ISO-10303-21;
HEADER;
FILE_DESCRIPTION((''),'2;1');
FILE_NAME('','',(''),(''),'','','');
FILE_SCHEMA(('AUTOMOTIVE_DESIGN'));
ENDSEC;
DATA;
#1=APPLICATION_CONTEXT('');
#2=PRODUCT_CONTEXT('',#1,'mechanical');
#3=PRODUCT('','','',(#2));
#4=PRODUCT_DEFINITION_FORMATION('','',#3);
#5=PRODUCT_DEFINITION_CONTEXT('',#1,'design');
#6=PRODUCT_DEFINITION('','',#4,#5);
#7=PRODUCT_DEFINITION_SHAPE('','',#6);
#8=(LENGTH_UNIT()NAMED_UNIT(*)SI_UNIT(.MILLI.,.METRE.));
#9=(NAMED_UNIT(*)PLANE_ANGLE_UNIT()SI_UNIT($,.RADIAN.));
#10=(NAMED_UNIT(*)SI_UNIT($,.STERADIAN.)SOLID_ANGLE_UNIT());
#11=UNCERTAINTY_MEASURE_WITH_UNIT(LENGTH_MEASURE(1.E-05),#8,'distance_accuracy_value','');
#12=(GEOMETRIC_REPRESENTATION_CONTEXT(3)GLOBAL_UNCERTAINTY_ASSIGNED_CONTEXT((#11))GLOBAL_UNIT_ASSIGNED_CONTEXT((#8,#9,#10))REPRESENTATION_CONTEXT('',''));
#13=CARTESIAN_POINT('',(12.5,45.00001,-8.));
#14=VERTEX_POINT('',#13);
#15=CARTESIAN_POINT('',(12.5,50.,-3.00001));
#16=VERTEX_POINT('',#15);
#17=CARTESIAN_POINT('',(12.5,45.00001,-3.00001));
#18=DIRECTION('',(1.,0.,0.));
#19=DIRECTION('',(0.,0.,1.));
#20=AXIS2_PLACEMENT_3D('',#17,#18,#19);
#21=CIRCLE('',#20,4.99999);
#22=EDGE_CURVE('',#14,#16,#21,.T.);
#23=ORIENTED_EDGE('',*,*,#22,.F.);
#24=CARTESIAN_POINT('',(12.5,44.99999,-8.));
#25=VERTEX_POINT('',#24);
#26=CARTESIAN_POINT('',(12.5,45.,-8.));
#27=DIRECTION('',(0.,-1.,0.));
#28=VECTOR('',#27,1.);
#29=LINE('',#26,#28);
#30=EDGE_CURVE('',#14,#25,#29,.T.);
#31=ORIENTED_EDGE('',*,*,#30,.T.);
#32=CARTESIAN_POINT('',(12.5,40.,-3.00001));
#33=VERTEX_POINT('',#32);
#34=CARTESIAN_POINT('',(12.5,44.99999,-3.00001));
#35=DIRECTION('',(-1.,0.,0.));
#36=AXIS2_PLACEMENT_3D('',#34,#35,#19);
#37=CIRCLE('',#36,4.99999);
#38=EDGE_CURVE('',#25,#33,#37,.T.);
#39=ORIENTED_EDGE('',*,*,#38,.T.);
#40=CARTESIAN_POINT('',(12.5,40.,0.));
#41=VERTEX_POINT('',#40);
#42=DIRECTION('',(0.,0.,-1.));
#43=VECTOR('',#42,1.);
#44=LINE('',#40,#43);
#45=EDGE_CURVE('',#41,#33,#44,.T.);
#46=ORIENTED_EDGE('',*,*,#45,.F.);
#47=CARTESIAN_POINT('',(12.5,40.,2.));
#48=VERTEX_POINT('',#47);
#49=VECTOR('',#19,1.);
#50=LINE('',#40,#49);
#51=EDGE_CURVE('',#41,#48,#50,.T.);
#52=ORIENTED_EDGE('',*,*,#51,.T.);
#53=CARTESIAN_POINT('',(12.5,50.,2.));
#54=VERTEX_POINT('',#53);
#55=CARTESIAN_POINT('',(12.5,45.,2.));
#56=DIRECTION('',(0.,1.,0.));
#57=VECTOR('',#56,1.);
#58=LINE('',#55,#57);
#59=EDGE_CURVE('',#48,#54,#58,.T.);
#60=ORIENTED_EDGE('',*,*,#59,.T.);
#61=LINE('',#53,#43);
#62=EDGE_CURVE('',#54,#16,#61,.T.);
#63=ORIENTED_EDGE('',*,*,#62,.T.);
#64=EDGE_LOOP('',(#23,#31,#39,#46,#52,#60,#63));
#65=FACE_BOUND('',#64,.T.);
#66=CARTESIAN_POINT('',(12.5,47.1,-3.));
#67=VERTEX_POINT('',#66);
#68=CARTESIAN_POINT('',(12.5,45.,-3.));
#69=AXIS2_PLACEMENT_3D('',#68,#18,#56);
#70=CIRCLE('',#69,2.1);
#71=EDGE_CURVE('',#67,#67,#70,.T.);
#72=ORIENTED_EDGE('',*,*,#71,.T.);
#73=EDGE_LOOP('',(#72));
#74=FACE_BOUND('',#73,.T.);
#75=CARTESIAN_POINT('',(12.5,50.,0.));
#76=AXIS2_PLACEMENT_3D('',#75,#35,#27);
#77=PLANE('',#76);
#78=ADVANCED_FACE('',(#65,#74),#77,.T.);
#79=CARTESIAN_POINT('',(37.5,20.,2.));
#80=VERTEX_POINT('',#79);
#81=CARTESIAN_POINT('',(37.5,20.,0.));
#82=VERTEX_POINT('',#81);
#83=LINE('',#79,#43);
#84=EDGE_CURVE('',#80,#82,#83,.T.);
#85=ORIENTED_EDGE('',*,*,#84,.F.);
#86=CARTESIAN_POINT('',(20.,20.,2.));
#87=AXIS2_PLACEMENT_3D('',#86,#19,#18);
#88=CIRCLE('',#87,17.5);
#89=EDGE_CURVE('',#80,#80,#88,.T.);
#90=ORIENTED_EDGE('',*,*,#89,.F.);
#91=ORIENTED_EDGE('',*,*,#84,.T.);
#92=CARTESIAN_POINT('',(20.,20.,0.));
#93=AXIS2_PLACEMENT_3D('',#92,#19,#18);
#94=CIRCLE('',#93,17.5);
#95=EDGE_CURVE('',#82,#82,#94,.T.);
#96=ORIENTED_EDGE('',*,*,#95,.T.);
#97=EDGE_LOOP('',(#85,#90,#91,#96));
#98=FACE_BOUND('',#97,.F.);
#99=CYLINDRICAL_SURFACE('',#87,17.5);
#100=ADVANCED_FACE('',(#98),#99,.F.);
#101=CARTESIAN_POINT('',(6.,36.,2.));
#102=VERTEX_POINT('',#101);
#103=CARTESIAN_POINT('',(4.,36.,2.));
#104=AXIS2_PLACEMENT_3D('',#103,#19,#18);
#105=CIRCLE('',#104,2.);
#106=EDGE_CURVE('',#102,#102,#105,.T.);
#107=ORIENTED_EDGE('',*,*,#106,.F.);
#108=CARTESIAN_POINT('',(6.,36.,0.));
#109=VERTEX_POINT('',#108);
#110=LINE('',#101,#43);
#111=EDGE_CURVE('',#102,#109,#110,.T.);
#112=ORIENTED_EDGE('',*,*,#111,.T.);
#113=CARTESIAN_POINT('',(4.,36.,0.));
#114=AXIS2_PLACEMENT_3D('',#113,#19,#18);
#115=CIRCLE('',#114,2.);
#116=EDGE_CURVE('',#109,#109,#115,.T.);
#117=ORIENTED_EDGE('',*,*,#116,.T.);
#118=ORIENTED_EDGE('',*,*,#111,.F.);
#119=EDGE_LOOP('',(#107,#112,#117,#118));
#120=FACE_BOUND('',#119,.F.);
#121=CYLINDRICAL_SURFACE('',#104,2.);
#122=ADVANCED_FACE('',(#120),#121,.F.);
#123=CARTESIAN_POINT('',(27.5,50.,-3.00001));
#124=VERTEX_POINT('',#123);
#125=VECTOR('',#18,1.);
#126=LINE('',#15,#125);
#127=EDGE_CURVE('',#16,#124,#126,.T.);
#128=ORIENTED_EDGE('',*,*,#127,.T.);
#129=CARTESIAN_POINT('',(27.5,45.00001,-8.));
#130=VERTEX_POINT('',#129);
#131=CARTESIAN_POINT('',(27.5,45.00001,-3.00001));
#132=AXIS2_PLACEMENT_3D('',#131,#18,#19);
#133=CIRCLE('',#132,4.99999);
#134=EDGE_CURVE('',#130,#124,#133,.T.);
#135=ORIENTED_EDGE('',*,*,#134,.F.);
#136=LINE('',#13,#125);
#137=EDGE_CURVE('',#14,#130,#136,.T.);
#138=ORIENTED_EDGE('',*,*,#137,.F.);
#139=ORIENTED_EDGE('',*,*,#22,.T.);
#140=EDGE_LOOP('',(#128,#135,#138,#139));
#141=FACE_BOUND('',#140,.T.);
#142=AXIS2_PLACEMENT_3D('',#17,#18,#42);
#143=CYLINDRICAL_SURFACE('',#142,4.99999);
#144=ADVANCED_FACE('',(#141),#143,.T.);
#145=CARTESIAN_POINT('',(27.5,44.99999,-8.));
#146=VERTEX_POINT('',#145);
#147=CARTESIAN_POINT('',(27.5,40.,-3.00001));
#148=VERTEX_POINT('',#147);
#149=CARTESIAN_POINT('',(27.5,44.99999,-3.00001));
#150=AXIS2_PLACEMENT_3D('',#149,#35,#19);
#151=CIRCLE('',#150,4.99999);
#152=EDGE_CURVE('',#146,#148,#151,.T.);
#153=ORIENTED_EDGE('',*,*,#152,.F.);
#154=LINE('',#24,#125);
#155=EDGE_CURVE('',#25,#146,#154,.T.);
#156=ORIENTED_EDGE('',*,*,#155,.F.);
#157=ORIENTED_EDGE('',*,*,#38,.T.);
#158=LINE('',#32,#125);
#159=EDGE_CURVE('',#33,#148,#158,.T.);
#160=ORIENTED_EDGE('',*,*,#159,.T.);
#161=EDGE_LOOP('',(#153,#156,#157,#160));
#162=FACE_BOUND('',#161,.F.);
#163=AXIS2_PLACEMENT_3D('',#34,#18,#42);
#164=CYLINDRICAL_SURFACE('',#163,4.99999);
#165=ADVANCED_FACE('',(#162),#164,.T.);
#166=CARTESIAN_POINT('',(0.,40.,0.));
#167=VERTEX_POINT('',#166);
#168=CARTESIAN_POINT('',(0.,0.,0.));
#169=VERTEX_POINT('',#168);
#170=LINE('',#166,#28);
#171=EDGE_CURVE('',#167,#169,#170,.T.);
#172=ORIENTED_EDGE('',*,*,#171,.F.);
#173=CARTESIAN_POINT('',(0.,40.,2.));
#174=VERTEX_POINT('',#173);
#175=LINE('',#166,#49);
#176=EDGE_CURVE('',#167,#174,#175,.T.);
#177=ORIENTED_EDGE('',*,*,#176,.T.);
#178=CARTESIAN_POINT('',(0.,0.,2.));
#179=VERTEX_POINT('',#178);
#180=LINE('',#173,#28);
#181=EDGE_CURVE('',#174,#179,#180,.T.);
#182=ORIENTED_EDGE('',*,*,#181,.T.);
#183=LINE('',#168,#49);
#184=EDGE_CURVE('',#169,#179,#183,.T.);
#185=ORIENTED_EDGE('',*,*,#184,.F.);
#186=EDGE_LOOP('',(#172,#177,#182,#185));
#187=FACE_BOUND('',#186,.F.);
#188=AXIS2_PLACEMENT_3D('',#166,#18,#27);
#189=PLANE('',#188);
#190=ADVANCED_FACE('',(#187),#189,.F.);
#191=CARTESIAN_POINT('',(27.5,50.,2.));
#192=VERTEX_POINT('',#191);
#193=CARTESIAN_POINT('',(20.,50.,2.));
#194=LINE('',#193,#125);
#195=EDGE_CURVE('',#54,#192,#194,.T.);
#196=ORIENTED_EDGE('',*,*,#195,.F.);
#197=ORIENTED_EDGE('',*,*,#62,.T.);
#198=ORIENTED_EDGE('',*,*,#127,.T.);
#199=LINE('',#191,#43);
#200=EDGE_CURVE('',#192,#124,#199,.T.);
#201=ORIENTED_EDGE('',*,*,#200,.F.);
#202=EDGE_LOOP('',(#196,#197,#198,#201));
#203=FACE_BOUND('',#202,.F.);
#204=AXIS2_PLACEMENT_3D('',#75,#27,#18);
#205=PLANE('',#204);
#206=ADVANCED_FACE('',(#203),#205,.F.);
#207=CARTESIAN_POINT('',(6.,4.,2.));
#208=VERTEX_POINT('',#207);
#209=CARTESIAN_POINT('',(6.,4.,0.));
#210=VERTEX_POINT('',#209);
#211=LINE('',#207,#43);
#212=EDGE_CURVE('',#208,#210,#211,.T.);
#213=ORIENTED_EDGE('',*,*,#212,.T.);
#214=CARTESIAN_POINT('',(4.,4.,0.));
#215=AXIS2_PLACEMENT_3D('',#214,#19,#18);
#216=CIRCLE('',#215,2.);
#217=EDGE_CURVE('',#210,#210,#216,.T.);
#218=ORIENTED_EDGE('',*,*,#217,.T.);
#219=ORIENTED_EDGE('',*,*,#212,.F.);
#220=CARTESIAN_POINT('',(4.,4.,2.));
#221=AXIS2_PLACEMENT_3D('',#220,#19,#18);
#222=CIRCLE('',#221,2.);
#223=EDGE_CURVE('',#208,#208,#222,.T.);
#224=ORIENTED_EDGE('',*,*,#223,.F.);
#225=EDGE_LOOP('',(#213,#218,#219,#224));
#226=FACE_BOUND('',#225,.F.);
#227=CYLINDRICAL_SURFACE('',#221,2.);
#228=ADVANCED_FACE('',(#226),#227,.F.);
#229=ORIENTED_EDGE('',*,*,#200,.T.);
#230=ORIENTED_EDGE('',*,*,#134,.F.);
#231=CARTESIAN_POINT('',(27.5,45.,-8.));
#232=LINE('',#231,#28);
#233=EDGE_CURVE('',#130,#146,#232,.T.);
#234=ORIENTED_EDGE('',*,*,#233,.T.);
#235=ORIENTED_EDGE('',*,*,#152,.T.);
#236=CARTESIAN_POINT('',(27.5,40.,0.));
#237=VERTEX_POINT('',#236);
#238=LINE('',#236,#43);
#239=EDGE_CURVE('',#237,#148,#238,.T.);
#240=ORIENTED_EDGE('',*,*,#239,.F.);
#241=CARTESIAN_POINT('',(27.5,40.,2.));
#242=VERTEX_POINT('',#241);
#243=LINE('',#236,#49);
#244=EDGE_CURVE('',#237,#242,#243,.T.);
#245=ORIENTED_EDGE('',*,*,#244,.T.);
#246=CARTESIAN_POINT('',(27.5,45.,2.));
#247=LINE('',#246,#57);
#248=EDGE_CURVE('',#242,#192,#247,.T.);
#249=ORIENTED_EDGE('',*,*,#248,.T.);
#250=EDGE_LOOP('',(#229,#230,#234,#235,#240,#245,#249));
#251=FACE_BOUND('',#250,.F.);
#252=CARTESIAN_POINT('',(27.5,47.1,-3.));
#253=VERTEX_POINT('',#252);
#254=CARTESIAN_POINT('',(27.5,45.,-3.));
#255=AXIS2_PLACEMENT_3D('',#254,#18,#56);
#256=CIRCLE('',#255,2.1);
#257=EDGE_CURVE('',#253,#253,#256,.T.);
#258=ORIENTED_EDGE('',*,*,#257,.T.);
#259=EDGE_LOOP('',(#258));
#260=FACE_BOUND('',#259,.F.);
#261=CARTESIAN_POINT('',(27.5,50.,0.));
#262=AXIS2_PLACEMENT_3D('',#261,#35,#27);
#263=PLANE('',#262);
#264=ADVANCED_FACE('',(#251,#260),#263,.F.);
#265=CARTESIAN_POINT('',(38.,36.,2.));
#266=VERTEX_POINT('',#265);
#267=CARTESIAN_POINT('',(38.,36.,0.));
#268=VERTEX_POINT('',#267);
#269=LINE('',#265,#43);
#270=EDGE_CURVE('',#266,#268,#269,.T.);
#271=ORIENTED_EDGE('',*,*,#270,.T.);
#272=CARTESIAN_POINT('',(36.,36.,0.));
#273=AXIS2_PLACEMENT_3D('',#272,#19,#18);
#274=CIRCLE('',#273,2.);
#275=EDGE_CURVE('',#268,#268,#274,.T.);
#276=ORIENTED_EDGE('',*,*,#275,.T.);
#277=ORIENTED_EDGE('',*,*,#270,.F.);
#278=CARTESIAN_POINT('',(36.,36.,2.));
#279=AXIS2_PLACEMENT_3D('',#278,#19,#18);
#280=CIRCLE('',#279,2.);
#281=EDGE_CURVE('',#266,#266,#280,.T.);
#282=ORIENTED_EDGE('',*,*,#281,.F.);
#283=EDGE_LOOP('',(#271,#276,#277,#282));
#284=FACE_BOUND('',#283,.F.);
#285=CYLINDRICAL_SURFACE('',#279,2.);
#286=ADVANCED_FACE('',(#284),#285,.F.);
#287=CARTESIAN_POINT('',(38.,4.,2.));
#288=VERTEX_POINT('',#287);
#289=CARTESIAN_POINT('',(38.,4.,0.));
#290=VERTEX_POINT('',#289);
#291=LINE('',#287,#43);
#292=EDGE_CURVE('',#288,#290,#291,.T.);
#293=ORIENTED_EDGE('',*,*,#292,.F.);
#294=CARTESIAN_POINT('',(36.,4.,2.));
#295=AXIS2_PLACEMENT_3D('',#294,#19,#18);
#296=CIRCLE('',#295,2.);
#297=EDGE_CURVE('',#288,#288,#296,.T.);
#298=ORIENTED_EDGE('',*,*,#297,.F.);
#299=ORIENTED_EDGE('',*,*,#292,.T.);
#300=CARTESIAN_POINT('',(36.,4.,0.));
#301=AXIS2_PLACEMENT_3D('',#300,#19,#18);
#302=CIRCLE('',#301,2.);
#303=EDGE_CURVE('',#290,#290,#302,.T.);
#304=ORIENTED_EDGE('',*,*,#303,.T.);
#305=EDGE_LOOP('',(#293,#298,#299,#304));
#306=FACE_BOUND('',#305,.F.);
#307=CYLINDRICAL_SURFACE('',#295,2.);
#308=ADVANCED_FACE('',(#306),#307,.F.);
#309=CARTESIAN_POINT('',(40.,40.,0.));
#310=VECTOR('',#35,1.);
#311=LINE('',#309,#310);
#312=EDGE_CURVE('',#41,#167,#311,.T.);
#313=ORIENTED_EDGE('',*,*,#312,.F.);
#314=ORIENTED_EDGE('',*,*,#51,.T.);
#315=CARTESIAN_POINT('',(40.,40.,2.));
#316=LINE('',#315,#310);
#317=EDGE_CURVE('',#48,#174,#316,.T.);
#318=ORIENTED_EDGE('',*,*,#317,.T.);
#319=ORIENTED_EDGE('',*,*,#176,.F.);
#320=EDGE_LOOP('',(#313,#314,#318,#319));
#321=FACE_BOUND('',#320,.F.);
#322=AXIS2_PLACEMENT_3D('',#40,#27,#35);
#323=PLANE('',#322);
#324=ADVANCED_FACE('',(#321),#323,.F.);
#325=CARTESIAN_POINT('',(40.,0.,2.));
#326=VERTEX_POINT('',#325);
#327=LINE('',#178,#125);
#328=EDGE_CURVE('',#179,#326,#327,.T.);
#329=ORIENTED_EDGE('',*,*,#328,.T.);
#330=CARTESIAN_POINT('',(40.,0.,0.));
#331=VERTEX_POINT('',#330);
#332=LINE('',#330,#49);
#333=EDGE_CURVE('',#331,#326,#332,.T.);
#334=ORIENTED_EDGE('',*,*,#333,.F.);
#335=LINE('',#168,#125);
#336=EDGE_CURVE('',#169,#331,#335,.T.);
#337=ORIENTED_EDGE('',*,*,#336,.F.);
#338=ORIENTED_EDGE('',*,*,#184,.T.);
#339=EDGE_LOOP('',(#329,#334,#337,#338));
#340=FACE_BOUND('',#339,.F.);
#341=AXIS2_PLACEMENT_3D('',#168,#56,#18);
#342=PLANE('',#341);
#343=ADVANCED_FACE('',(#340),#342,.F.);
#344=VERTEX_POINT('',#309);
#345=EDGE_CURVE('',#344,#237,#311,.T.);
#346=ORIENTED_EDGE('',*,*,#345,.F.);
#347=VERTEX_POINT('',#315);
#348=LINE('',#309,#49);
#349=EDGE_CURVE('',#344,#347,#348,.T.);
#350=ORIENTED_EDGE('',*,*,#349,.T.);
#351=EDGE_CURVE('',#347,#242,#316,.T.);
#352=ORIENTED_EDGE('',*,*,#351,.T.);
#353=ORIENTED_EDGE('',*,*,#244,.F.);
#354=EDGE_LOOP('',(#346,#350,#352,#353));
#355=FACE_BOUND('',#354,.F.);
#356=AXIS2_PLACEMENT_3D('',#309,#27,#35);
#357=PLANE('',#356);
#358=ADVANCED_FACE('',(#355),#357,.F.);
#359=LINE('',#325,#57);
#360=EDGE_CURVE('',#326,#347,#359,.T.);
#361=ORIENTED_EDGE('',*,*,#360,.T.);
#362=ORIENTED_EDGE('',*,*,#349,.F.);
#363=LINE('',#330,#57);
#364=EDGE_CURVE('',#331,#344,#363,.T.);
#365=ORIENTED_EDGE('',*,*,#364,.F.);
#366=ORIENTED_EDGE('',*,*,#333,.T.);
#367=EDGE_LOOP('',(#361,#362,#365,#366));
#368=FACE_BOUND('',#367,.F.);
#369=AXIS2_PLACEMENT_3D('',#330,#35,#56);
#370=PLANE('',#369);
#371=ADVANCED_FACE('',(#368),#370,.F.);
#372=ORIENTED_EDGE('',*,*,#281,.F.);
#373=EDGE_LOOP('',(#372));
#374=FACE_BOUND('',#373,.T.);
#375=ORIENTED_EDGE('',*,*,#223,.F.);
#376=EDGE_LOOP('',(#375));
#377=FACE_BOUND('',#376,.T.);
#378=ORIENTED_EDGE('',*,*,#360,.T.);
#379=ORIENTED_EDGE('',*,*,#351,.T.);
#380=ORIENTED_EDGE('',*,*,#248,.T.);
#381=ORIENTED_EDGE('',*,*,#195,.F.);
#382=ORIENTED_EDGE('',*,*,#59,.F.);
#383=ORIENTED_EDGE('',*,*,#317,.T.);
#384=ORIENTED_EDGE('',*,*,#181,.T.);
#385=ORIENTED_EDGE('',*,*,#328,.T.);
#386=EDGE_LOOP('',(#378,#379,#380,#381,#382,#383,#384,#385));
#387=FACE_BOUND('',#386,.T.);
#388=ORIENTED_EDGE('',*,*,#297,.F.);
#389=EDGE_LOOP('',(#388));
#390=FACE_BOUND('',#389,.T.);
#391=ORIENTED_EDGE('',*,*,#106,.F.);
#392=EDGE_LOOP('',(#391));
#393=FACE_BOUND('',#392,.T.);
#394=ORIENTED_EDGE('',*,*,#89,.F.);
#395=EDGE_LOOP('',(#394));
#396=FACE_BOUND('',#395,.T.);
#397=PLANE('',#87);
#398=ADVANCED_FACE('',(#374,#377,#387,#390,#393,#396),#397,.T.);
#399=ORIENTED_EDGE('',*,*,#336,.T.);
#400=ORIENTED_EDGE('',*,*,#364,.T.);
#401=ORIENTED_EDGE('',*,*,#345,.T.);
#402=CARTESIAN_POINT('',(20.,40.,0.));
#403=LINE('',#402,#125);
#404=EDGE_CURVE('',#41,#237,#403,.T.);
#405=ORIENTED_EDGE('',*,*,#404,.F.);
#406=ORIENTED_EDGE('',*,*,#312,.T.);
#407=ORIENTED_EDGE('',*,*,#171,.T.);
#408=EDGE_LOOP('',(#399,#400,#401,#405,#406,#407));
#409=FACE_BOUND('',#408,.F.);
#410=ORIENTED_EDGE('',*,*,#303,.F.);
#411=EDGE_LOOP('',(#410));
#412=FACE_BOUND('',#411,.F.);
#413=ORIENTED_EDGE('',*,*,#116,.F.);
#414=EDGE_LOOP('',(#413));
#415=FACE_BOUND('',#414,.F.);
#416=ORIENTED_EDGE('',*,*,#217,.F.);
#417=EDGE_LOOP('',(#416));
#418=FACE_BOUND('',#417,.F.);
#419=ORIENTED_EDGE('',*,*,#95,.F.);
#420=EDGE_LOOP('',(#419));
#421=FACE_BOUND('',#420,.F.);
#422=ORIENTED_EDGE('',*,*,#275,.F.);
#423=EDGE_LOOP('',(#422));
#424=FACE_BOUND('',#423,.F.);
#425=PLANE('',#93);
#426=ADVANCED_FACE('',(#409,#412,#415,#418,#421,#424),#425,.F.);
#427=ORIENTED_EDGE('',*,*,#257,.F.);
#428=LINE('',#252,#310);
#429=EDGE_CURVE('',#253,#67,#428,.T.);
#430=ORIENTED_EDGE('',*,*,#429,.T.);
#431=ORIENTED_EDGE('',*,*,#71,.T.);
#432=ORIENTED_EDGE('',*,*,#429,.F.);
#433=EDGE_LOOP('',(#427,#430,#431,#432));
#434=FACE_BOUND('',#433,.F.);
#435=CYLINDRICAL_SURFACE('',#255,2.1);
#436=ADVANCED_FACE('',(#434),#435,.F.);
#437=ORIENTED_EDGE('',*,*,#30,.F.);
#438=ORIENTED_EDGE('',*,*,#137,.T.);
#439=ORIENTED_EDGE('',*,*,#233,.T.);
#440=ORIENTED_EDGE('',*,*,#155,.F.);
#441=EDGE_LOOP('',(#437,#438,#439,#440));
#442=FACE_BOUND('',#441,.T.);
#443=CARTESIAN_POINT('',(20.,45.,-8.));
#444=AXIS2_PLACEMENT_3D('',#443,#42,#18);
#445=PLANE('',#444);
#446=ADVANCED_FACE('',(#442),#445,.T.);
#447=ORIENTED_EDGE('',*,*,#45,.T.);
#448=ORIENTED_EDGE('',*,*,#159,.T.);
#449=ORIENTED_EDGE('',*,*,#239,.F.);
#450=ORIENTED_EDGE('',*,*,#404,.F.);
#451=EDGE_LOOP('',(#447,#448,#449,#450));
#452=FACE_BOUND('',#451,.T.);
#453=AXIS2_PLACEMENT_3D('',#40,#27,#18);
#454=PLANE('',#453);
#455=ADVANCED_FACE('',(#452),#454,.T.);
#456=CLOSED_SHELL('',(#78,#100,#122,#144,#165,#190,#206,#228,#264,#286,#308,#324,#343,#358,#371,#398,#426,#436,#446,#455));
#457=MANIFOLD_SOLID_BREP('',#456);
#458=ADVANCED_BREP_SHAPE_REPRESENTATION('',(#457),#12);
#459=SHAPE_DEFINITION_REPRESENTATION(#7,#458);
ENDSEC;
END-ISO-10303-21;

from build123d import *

# Parameters (mm, degrees)
F0_W     = 15
F0_H     = 10
F1_DEPTH = 2
F2_R     = 2
F3_DEPTH = 2.001
F4_R     = 17.5
F5_DEPTH = 2.001
F6_W     = 15
F6_H     = 10
F7_DEPTH = 8
F8_R     = 2.1
F9_DEPTH = 27.501
F10_R    = 4.99999


# Not quite as in the source:
# - a fillet or chamfer is up to 0.001 mm smaller than in the source, because OpenCascade refuses the exact size


with BuildPart() as f1:
    # F0 (on Top) → F1 (new body)
    with BuildSketch(Plane.XY):
        Polygon((0, 40), (0, 0), (40, 0), (40, 40), (27.5, 40), (12.5, 40), align=None)
        with Locations((20, 45)):
            Rectangle(F0_W, F0_H)
    extrude(amount=F1_DEPTH)

    # F2 (on face) → F3 (cut, through all)
    with BuildSketch(Plane.XY.offset(2)):
        with Locations((4, 36)):
            Circle(F2_R)
        with Locations((36, 36)):
            Circle(F2_R)
        with Locations((4, 4)):
            Circle(F2_R)
        with Locations((36, 4)):
            Circle(F2_R)
    extrude(amount=-F3_DEPTH, mode=Mode.SUBTRACT)

    # F4 (on face) → F5 (cut, through all)
    with BuildSketch(Plane.XY.offset(2)):
        with Locations((20, 20)):
            Circle(F4_R)
    extrude(amount=-F5_DEPTH, mode=Mode.SUBTRACT)

    # F6 (on face) → F7 (join)
    with BuildSketch(Plane(origin=(0, 0, 0), x_dir=(1, 0, 0), z_dir=(0, 0, -1))):
        with Locations((20, -45)):
            Rectangle(F6_W, F6_H)
    extrude(amount=F7_DEPTH)

    # F8 (on face) → F9 (cut, through all)
    with BuildSketch(Plane.YZ.offset(27.5)):
        with Locations((45, -3)):
            Circle(F8_R)
    extrude(amount=-F9_DEPTH, mode=Mode.SUBTRACT)

    # F10 (radius 5 in the source; OpenCascade refuses exactly that, so slightly less here)
    f10_edges = [f1.edges().sort_by_distance(p)[0] for p in [
        (20, 50, -8),
        (20, 40, -8),
    ]]
    fillet(f10_edges, radius=F10_R)


solid = f1.part
